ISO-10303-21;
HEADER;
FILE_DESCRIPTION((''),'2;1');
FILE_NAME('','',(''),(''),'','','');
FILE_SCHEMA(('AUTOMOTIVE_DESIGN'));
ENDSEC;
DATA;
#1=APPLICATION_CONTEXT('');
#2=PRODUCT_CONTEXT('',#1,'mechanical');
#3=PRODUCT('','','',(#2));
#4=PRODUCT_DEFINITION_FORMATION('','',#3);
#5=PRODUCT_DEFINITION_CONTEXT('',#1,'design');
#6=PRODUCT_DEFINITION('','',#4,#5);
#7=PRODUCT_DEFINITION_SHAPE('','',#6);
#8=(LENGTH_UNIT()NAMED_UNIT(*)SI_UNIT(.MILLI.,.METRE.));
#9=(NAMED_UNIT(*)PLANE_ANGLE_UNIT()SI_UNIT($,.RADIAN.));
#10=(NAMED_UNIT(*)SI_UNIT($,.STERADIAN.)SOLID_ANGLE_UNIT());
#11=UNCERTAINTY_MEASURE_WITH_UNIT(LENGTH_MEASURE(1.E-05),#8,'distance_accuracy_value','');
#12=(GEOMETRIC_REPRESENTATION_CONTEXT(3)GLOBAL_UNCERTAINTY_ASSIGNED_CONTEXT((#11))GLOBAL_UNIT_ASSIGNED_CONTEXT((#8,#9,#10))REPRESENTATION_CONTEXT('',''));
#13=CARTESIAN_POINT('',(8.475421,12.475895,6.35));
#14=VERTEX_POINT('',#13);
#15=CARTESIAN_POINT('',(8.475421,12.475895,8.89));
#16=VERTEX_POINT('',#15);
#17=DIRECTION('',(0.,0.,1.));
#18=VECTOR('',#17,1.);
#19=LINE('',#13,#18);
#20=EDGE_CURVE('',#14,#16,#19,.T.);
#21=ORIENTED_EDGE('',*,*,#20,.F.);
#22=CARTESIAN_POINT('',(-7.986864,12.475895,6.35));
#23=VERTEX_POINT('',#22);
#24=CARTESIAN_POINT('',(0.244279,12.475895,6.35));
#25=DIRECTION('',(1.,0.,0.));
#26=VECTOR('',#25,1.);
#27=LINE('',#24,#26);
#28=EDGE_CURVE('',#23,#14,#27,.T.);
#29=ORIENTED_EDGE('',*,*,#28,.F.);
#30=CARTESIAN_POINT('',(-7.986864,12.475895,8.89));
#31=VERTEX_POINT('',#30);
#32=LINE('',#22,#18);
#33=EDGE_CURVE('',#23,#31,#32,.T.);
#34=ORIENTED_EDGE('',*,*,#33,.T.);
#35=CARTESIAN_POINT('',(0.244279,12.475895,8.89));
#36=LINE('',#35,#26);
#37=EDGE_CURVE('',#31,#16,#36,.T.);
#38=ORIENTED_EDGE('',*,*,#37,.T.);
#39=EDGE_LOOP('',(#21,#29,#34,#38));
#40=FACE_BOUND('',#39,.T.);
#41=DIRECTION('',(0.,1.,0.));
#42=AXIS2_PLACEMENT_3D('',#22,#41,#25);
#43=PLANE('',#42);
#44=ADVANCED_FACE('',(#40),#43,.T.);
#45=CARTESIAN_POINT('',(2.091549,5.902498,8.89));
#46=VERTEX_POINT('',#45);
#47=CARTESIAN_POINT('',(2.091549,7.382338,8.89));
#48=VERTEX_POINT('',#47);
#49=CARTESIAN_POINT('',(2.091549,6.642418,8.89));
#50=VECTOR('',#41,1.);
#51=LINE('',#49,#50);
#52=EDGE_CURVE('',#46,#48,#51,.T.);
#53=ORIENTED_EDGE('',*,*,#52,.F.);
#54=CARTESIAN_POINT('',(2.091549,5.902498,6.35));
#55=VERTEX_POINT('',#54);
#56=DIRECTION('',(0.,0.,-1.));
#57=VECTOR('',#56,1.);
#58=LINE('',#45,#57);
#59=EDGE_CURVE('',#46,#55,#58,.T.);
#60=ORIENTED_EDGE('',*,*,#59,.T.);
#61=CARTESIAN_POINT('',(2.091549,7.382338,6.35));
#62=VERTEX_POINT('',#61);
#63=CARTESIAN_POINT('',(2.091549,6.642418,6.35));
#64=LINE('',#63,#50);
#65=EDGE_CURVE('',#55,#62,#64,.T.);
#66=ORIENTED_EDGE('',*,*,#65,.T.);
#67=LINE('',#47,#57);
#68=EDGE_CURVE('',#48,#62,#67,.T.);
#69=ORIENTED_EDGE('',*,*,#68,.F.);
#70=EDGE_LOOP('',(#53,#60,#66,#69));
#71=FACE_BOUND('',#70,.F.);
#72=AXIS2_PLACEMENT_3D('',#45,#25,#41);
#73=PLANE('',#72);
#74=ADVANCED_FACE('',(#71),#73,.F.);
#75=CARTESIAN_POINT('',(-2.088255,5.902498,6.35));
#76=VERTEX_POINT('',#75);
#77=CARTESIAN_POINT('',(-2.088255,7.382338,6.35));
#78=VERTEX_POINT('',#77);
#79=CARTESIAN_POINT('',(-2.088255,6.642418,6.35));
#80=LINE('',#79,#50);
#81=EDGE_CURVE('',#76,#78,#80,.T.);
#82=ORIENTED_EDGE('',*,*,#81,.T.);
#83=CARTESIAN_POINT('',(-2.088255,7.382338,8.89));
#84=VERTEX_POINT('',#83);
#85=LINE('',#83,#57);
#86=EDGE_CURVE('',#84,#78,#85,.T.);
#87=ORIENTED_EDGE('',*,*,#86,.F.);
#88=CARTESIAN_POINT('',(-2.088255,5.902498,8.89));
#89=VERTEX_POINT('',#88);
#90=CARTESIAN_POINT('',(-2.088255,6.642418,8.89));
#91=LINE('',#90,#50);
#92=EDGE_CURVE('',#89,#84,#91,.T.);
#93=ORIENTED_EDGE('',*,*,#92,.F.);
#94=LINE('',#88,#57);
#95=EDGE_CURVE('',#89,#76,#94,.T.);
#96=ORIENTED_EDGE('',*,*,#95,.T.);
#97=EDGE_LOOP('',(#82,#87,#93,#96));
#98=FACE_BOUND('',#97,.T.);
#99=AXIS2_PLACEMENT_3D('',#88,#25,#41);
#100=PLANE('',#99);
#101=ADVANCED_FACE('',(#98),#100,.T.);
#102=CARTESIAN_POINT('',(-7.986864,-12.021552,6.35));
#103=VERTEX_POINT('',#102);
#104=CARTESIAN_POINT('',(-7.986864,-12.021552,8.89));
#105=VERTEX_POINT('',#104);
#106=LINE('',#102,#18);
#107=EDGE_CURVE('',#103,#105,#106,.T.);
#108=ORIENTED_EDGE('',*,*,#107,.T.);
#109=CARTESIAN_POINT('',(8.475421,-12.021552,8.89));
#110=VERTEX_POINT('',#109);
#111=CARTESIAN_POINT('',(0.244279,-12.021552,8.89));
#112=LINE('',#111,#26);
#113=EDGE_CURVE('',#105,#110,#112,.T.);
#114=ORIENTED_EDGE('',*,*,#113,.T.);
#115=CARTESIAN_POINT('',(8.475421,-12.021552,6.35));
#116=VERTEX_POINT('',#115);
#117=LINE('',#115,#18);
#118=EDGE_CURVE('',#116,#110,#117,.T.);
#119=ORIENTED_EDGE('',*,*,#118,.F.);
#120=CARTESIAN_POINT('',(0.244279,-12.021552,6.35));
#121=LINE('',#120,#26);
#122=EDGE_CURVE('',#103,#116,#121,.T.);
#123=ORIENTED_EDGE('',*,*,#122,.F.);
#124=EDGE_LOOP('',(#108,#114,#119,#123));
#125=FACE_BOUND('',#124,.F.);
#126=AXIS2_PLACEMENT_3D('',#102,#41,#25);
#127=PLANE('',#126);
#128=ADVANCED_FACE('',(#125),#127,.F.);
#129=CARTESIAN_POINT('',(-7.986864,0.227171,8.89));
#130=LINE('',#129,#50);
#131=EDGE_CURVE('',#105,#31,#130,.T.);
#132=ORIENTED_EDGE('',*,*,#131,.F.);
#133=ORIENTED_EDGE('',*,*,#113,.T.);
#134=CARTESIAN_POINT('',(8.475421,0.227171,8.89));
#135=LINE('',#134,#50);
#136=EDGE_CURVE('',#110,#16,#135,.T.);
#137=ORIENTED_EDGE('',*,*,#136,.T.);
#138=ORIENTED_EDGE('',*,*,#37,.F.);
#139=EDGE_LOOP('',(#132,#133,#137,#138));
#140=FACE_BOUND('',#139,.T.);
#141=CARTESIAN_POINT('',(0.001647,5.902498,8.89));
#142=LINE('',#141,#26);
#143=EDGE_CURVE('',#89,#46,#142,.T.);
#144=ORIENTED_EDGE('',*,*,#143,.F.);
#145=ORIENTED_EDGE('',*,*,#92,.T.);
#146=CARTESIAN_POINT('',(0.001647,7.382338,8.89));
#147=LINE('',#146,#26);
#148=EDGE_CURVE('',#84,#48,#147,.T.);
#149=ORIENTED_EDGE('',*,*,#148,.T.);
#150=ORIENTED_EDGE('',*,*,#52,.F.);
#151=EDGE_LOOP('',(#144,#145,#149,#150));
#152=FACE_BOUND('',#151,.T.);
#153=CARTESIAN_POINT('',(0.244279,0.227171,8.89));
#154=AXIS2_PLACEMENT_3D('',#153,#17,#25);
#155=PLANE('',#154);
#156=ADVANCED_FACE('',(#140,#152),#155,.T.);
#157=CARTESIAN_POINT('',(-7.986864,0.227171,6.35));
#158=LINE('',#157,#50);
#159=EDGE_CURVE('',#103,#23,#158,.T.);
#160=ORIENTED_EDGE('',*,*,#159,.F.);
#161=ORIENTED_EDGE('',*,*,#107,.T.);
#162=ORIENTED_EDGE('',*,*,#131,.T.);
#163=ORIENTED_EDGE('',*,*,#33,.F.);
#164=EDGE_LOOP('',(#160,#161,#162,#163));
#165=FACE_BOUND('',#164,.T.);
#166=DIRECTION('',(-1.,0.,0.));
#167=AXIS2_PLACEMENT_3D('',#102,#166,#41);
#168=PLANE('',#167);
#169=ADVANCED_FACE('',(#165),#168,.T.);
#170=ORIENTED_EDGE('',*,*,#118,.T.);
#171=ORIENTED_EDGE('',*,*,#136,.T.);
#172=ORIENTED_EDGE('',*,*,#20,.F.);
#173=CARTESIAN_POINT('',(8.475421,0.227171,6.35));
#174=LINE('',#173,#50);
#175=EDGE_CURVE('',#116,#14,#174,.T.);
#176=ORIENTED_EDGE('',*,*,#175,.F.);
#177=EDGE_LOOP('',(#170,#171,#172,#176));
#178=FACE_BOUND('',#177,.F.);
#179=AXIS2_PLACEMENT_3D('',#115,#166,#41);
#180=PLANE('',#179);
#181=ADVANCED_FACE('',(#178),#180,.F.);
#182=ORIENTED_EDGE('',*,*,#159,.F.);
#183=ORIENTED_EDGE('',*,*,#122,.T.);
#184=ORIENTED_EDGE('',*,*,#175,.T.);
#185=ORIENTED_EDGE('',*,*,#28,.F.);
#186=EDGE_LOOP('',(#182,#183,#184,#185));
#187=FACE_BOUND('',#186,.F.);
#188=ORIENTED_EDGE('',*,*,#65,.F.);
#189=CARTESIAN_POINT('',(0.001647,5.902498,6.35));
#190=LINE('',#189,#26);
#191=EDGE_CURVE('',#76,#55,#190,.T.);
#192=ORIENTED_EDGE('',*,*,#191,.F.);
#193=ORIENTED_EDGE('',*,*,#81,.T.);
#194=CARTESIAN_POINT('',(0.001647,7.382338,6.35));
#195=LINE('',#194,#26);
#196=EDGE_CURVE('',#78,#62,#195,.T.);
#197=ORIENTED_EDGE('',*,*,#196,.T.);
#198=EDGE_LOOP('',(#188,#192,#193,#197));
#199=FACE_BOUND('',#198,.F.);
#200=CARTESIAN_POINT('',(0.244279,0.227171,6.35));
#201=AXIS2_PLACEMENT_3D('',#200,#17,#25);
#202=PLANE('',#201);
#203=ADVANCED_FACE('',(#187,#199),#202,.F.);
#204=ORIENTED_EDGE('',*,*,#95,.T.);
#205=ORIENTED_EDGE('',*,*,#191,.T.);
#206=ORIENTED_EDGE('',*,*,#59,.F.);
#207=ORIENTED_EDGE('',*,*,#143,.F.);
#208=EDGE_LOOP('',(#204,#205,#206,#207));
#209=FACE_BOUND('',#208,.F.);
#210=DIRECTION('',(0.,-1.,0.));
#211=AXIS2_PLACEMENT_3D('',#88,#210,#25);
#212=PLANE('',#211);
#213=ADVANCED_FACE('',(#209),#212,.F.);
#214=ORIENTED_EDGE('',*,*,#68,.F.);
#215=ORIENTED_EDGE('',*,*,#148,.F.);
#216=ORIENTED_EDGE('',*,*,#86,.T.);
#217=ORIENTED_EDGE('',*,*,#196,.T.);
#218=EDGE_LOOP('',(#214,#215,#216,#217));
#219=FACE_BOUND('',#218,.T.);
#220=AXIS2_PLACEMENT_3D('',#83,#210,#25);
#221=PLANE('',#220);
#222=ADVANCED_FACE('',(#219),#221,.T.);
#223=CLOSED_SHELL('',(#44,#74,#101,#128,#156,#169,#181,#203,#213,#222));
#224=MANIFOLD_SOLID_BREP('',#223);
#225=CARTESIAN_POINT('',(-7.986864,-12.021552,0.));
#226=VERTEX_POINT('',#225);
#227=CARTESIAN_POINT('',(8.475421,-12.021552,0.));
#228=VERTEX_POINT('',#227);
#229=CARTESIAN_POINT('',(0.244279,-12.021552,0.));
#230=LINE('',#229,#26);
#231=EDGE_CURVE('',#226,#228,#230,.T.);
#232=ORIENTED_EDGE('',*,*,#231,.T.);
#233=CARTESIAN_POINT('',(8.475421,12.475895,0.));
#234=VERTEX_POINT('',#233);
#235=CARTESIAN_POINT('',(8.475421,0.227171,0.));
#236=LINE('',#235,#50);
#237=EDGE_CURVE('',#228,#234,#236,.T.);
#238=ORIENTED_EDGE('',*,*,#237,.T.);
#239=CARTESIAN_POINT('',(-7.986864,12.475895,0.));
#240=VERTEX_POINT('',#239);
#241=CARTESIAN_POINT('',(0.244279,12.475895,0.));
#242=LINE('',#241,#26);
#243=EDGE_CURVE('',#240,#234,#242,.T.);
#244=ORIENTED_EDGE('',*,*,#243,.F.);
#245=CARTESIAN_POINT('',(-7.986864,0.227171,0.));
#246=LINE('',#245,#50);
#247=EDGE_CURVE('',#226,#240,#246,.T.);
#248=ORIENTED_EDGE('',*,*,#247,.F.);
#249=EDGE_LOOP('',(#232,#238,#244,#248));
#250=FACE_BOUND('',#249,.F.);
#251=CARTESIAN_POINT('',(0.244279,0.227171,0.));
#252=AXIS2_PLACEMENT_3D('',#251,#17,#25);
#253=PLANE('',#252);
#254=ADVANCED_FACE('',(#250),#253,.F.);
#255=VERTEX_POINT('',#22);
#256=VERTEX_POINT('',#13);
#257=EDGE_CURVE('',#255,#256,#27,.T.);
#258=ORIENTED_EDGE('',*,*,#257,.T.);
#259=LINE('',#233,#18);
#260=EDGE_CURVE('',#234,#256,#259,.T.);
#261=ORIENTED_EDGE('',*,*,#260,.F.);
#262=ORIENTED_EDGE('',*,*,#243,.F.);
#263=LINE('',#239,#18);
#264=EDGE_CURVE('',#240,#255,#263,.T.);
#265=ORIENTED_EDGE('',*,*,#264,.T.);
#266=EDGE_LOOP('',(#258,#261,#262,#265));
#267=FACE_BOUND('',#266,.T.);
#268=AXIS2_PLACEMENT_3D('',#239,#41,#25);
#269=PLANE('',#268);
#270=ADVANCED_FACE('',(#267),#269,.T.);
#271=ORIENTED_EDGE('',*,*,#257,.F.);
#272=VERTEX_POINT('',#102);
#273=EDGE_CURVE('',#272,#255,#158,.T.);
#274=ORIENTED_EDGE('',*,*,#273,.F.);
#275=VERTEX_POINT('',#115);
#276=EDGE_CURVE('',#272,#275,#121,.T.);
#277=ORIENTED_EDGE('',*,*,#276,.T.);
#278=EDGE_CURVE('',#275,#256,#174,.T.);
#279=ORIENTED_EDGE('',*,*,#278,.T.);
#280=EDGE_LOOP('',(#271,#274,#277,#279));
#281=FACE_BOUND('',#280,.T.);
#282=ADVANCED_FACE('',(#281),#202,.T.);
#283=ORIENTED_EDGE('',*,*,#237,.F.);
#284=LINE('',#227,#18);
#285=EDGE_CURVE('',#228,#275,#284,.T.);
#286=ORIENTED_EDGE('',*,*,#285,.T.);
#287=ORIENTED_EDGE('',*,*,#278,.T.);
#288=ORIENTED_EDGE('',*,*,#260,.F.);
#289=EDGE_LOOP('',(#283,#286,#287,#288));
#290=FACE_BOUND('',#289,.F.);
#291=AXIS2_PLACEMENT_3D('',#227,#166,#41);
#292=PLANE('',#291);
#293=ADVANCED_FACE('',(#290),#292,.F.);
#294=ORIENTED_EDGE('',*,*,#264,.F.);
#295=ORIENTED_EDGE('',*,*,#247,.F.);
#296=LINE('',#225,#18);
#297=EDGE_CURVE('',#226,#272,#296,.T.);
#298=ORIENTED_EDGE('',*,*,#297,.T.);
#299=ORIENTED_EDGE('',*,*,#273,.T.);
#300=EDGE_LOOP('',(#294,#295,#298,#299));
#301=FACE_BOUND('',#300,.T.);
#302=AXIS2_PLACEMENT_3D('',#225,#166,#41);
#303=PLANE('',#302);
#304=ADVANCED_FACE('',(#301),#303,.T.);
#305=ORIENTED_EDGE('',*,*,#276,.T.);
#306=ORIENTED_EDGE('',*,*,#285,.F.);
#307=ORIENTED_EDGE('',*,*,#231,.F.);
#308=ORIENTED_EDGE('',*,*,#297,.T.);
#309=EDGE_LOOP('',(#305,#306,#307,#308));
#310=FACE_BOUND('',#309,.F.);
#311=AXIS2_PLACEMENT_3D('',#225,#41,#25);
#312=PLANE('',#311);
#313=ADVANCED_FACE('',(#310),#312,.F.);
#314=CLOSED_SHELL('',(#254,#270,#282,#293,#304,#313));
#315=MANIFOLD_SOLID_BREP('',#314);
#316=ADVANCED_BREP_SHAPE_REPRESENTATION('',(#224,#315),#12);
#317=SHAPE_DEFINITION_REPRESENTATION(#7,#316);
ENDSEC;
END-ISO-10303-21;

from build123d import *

# Parameters (mm, degrees)
F0_W     = 16.462284606
F0_H     = 24.4974466041
F1_DEPTH = 6.35
F2_W     = 16.462284606
F2_H     = 24.4974466041
F3_DEPTH = 2.54
F4_W     = 4.1798030725
F4_H     = 1.4798403718
F5_DEPTH = 2.54


# Not quite as in the source:
# - a feature names something its author has since deleted; it is built from what else it names


with BuildPart() as f1:
    # F0 (on Top) → F1 (new body)
    with BuildSketch(Plane.XY):
        with Locations((0.2442786936, 0.227171462)):
            Rectangle(F0_W, F0_H)
    extrude(amount=F1_DEPTH)


with BuildPart() as f3:
    # F2 (on face) → F3 (new body)
    with BuildSketch(Plane.XY.offset(6.35)):
        with Locations((0.2442786936, 0.227171462)):
            Rectangle(F2_W, F2_H)
    extrude(amount=F3_DEPTH)

    # F4 (on face) → F5 (cut)
    with BuildSketch(Plane.XY.offset(8.89)):
        with Locations((0.0016469858, 6.6424182151)):
            Rectangle(F4_W, F4_H)
    extrude(amount=-F5_DEPTH, mode=Mode.SUBTRACT)


solid = Compound([f1.part, f3.part])
